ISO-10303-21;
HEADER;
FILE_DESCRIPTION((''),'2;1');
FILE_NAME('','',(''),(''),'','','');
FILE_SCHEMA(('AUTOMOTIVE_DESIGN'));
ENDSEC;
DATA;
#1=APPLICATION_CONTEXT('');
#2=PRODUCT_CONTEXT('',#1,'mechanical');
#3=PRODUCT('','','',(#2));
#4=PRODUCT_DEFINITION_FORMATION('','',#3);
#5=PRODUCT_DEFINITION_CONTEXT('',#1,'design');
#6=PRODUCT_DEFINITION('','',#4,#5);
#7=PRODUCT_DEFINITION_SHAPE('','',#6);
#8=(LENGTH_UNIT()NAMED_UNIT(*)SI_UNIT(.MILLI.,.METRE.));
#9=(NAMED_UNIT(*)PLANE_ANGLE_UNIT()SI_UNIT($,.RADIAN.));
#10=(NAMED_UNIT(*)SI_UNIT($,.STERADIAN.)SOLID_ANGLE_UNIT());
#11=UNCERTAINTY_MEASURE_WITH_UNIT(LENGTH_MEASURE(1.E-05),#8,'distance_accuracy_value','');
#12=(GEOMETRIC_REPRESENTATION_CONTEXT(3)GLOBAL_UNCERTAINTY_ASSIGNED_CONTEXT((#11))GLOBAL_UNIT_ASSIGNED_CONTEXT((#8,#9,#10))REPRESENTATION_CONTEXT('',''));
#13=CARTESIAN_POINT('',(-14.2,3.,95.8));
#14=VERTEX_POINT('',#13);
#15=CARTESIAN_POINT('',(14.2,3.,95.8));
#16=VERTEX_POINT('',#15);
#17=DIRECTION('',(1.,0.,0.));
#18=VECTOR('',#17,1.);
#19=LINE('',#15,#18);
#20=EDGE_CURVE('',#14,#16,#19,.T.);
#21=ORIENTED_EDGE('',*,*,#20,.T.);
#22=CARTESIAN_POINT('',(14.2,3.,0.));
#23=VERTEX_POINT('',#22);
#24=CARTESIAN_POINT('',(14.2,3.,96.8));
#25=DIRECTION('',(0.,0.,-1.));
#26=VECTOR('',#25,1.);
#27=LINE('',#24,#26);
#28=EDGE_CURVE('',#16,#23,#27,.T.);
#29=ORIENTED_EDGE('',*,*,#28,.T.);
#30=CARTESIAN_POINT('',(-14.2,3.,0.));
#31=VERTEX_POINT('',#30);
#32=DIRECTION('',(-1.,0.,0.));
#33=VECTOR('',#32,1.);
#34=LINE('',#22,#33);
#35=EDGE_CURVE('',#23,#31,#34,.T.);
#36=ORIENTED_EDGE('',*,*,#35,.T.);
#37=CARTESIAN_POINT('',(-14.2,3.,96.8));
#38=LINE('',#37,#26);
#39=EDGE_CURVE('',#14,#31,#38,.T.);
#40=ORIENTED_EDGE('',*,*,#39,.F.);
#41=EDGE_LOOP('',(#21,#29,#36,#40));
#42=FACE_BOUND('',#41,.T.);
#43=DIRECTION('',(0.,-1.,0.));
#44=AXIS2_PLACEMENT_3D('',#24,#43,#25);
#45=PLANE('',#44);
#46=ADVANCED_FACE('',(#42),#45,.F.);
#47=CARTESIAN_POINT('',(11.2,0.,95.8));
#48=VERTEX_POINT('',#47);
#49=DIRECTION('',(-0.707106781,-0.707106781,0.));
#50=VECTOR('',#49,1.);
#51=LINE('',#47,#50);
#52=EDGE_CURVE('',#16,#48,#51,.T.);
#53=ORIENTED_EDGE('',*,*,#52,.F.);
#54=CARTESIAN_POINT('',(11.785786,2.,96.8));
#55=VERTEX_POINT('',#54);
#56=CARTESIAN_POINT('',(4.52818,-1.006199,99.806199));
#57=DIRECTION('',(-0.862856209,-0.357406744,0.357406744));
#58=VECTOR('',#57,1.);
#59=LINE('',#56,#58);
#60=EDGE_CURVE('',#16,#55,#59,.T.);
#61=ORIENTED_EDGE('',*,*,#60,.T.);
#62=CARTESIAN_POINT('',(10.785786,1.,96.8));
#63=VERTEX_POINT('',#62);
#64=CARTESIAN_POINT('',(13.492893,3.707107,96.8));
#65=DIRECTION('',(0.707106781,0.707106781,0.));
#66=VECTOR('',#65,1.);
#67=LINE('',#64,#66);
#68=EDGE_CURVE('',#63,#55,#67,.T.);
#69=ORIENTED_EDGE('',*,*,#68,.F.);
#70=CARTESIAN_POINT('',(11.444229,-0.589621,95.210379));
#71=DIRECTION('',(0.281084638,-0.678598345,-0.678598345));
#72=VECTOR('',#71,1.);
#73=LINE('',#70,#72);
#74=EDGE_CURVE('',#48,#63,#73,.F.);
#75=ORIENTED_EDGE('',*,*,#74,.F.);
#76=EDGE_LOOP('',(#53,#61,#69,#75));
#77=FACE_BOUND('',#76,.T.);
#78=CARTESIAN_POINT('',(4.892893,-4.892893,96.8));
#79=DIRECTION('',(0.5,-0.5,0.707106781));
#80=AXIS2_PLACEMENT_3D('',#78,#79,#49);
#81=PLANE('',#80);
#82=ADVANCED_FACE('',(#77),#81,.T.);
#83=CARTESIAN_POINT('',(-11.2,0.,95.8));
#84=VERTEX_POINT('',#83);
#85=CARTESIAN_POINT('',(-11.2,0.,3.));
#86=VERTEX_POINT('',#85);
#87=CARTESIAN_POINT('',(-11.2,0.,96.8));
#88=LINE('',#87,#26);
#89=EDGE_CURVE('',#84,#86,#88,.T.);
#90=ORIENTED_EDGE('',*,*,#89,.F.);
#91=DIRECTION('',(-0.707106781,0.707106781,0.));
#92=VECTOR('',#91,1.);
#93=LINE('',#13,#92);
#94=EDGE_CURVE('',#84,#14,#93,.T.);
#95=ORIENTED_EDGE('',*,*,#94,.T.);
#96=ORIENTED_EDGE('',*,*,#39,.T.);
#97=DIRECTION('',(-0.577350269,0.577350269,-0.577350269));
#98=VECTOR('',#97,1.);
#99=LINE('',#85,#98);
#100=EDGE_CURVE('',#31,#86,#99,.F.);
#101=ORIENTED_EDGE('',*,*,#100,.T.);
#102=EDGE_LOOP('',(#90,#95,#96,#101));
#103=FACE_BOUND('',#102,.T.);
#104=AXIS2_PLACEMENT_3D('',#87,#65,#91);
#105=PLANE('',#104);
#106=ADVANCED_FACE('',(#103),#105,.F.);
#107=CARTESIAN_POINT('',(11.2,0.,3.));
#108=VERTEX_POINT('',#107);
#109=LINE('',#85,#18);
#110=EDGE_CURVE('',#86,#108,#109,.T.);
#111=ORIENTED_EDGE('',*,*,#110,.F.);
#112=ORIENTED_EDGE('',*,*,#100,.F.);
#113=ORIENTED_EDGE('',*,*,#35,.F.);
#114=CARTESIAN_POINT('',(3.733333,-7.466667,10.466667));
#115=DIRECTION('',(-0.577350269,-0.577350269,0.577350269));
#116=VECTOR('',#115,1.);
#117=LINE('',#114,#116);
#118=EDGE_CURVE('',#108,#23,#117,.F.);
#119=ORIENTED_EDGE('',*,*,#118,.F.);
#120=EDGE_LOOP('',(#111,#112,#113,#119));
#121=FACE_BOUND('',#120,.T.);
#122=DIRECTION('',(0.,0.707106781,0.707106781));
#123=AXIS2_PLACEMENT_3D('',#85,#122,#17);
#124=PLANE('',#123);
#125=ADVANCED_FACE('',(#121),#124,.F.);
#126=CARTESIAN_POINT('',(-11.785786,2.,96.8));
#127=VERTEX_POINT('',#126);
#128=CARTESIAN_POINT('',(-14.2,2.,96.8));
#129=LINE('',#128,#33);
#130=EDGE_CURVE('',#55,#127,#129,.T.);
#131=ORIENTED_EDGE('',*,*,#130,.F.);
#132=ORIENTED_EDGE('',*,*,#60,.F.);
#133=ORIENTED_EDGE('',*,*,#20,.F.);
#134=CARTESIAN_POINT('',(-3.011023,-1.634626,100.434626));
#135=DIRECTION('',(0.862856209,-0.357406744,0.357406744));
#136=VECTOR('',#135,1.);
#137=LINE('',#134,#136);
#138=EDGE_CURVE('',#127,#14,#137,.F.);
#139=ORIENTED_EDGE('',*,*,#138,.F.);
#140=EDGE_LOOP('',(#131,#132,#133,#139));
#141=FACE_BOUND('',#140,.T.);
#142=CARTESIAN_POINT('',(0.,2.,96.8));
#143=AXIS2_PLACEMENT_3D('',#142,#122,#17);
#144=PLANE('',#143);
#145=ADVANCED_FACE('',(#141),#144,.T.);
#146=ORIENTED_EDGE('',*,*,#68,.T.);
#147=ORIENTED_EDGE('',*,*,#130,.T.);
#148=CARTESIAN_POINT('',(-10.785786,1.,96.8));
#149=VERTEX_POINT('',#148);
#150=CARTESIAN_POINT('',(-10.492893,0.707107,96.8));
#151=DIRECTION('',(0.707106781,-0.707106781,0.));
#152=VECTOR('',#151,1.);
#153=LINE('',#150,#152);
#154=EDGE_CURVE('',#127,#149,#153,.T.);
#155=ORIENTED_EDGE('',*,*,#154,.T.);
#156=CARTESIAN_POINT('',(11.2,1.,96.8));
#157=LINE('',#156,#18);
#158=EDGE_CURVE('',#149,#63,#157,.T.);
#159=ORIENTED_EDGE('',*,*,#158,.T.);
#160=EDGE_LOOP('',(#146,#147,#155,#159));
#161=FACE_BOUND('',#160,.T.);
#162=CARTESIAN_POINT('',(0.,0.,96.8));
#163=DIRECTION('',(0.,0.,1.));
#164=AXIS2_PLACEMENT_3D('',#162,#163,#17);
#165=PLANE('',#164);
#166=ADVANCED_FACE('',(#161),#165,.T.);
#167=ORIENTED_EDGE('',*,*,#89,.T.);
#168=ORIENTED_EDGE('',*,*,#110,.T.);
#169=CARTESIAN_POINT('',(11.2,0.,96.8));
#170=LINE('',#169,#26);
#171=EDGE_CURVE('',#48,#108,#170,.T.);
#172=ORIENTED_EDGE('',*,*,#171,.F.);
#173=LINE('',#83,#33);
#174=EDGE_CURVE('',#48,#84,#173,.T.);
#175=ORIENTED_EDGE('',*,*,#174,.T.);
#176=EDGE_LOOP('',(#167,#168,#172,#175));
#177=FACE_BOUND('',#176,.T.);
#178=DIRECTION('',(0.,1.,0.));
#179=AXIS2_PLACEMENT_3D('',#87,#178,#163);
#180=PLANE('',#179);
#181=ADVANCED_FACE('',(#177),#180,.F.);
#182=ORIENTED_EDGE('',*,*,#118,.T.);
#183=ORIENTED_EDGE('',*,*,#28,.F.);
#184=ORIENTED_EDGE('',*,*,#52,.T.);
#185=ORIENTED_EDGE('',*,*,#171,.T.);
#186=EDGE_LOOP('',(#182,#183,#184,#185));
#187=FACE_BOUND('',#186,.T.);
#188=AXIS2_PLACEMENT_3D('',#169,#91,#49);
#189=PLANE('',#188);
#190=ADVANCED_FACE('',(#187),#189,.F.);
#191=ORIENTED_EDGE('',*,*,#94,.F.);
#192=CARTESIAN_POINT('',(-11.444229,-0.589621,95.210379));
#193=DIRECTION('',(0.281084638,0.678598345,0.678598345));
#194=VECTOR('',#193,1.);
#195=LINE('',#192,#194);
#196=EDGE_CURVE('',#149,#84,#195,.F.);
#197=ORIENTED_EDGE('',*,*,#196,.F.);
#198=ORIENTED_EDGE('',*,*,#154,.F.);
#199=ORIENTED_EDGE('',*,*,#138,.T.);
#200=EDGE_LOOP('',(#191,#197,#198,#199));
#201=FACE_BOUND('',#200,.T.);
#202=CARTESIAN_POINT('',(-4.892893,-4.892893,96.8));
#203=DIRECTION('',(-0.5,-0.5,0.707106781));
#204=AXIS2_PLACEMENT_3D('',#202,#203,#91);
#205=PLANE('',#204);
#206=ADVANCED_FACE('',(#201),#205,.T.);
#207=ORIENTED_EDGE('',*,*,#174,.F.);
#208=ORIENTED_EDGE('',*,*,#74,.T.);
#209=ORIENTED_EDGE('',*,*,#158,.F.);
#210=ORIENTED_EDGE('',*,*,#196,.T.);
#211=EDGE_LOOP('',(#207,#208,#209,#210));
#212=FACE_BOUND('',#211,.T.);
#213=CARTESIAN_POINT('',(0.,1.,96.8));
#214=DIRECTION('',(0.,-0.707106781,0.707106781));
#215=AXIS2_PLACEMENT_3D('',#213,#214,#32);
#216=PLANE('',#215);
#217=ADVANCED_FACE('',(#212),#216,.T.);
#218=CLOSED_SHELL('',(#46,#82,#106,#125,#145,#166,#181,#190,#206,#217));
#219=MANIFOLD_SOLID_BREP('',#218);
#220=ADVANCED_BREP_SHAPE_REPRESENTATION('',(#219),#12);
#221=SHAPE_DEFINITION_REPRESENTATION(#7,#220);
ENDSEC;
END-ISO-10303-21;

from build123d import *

# Parameters (mm, degrees)
BOSS_EXTRU_1_DEPTH = 96.8
CHANFREIN1_SIZE    = 1
CHANFREIN2_SIZE    = 3


with BuildPart() as part:
    # Esquisse1 → Boss.-Extru.1 (new body)
    with BuildSketch(Plane.XY):
        Polygon((-11.2, 0), (11.2, 0), (14.2, 3), (-14.2, 3), align=None)
    extrude(amount=BOSS_EXTRU_1_DEPTH)

    # Chanfrein1
    chanfrein1_edges = [part.edges().sort_by_distance(p)[0] for p in [
        (-12.7, 1.5, 96.8),
        (0, 0, 96.8),
        (12.7, 1.5, 96.8),
        (0, 3, 96.8),
    ]]
    chamfer(chanfrein1_edges, length=CHANFREIN1_SIZE)

    # Chanfrein2
    chanfrein2_edges = [part.edges().sort_by_distance(p)[0] for p in [
        (0, 0, 0),
    ]]
    chamfer(chanfrein2_edges, length=CHANFREIN2_SIZE - 0.0001)  # a hair under: the kernel refuses the full size


solid = part.part
